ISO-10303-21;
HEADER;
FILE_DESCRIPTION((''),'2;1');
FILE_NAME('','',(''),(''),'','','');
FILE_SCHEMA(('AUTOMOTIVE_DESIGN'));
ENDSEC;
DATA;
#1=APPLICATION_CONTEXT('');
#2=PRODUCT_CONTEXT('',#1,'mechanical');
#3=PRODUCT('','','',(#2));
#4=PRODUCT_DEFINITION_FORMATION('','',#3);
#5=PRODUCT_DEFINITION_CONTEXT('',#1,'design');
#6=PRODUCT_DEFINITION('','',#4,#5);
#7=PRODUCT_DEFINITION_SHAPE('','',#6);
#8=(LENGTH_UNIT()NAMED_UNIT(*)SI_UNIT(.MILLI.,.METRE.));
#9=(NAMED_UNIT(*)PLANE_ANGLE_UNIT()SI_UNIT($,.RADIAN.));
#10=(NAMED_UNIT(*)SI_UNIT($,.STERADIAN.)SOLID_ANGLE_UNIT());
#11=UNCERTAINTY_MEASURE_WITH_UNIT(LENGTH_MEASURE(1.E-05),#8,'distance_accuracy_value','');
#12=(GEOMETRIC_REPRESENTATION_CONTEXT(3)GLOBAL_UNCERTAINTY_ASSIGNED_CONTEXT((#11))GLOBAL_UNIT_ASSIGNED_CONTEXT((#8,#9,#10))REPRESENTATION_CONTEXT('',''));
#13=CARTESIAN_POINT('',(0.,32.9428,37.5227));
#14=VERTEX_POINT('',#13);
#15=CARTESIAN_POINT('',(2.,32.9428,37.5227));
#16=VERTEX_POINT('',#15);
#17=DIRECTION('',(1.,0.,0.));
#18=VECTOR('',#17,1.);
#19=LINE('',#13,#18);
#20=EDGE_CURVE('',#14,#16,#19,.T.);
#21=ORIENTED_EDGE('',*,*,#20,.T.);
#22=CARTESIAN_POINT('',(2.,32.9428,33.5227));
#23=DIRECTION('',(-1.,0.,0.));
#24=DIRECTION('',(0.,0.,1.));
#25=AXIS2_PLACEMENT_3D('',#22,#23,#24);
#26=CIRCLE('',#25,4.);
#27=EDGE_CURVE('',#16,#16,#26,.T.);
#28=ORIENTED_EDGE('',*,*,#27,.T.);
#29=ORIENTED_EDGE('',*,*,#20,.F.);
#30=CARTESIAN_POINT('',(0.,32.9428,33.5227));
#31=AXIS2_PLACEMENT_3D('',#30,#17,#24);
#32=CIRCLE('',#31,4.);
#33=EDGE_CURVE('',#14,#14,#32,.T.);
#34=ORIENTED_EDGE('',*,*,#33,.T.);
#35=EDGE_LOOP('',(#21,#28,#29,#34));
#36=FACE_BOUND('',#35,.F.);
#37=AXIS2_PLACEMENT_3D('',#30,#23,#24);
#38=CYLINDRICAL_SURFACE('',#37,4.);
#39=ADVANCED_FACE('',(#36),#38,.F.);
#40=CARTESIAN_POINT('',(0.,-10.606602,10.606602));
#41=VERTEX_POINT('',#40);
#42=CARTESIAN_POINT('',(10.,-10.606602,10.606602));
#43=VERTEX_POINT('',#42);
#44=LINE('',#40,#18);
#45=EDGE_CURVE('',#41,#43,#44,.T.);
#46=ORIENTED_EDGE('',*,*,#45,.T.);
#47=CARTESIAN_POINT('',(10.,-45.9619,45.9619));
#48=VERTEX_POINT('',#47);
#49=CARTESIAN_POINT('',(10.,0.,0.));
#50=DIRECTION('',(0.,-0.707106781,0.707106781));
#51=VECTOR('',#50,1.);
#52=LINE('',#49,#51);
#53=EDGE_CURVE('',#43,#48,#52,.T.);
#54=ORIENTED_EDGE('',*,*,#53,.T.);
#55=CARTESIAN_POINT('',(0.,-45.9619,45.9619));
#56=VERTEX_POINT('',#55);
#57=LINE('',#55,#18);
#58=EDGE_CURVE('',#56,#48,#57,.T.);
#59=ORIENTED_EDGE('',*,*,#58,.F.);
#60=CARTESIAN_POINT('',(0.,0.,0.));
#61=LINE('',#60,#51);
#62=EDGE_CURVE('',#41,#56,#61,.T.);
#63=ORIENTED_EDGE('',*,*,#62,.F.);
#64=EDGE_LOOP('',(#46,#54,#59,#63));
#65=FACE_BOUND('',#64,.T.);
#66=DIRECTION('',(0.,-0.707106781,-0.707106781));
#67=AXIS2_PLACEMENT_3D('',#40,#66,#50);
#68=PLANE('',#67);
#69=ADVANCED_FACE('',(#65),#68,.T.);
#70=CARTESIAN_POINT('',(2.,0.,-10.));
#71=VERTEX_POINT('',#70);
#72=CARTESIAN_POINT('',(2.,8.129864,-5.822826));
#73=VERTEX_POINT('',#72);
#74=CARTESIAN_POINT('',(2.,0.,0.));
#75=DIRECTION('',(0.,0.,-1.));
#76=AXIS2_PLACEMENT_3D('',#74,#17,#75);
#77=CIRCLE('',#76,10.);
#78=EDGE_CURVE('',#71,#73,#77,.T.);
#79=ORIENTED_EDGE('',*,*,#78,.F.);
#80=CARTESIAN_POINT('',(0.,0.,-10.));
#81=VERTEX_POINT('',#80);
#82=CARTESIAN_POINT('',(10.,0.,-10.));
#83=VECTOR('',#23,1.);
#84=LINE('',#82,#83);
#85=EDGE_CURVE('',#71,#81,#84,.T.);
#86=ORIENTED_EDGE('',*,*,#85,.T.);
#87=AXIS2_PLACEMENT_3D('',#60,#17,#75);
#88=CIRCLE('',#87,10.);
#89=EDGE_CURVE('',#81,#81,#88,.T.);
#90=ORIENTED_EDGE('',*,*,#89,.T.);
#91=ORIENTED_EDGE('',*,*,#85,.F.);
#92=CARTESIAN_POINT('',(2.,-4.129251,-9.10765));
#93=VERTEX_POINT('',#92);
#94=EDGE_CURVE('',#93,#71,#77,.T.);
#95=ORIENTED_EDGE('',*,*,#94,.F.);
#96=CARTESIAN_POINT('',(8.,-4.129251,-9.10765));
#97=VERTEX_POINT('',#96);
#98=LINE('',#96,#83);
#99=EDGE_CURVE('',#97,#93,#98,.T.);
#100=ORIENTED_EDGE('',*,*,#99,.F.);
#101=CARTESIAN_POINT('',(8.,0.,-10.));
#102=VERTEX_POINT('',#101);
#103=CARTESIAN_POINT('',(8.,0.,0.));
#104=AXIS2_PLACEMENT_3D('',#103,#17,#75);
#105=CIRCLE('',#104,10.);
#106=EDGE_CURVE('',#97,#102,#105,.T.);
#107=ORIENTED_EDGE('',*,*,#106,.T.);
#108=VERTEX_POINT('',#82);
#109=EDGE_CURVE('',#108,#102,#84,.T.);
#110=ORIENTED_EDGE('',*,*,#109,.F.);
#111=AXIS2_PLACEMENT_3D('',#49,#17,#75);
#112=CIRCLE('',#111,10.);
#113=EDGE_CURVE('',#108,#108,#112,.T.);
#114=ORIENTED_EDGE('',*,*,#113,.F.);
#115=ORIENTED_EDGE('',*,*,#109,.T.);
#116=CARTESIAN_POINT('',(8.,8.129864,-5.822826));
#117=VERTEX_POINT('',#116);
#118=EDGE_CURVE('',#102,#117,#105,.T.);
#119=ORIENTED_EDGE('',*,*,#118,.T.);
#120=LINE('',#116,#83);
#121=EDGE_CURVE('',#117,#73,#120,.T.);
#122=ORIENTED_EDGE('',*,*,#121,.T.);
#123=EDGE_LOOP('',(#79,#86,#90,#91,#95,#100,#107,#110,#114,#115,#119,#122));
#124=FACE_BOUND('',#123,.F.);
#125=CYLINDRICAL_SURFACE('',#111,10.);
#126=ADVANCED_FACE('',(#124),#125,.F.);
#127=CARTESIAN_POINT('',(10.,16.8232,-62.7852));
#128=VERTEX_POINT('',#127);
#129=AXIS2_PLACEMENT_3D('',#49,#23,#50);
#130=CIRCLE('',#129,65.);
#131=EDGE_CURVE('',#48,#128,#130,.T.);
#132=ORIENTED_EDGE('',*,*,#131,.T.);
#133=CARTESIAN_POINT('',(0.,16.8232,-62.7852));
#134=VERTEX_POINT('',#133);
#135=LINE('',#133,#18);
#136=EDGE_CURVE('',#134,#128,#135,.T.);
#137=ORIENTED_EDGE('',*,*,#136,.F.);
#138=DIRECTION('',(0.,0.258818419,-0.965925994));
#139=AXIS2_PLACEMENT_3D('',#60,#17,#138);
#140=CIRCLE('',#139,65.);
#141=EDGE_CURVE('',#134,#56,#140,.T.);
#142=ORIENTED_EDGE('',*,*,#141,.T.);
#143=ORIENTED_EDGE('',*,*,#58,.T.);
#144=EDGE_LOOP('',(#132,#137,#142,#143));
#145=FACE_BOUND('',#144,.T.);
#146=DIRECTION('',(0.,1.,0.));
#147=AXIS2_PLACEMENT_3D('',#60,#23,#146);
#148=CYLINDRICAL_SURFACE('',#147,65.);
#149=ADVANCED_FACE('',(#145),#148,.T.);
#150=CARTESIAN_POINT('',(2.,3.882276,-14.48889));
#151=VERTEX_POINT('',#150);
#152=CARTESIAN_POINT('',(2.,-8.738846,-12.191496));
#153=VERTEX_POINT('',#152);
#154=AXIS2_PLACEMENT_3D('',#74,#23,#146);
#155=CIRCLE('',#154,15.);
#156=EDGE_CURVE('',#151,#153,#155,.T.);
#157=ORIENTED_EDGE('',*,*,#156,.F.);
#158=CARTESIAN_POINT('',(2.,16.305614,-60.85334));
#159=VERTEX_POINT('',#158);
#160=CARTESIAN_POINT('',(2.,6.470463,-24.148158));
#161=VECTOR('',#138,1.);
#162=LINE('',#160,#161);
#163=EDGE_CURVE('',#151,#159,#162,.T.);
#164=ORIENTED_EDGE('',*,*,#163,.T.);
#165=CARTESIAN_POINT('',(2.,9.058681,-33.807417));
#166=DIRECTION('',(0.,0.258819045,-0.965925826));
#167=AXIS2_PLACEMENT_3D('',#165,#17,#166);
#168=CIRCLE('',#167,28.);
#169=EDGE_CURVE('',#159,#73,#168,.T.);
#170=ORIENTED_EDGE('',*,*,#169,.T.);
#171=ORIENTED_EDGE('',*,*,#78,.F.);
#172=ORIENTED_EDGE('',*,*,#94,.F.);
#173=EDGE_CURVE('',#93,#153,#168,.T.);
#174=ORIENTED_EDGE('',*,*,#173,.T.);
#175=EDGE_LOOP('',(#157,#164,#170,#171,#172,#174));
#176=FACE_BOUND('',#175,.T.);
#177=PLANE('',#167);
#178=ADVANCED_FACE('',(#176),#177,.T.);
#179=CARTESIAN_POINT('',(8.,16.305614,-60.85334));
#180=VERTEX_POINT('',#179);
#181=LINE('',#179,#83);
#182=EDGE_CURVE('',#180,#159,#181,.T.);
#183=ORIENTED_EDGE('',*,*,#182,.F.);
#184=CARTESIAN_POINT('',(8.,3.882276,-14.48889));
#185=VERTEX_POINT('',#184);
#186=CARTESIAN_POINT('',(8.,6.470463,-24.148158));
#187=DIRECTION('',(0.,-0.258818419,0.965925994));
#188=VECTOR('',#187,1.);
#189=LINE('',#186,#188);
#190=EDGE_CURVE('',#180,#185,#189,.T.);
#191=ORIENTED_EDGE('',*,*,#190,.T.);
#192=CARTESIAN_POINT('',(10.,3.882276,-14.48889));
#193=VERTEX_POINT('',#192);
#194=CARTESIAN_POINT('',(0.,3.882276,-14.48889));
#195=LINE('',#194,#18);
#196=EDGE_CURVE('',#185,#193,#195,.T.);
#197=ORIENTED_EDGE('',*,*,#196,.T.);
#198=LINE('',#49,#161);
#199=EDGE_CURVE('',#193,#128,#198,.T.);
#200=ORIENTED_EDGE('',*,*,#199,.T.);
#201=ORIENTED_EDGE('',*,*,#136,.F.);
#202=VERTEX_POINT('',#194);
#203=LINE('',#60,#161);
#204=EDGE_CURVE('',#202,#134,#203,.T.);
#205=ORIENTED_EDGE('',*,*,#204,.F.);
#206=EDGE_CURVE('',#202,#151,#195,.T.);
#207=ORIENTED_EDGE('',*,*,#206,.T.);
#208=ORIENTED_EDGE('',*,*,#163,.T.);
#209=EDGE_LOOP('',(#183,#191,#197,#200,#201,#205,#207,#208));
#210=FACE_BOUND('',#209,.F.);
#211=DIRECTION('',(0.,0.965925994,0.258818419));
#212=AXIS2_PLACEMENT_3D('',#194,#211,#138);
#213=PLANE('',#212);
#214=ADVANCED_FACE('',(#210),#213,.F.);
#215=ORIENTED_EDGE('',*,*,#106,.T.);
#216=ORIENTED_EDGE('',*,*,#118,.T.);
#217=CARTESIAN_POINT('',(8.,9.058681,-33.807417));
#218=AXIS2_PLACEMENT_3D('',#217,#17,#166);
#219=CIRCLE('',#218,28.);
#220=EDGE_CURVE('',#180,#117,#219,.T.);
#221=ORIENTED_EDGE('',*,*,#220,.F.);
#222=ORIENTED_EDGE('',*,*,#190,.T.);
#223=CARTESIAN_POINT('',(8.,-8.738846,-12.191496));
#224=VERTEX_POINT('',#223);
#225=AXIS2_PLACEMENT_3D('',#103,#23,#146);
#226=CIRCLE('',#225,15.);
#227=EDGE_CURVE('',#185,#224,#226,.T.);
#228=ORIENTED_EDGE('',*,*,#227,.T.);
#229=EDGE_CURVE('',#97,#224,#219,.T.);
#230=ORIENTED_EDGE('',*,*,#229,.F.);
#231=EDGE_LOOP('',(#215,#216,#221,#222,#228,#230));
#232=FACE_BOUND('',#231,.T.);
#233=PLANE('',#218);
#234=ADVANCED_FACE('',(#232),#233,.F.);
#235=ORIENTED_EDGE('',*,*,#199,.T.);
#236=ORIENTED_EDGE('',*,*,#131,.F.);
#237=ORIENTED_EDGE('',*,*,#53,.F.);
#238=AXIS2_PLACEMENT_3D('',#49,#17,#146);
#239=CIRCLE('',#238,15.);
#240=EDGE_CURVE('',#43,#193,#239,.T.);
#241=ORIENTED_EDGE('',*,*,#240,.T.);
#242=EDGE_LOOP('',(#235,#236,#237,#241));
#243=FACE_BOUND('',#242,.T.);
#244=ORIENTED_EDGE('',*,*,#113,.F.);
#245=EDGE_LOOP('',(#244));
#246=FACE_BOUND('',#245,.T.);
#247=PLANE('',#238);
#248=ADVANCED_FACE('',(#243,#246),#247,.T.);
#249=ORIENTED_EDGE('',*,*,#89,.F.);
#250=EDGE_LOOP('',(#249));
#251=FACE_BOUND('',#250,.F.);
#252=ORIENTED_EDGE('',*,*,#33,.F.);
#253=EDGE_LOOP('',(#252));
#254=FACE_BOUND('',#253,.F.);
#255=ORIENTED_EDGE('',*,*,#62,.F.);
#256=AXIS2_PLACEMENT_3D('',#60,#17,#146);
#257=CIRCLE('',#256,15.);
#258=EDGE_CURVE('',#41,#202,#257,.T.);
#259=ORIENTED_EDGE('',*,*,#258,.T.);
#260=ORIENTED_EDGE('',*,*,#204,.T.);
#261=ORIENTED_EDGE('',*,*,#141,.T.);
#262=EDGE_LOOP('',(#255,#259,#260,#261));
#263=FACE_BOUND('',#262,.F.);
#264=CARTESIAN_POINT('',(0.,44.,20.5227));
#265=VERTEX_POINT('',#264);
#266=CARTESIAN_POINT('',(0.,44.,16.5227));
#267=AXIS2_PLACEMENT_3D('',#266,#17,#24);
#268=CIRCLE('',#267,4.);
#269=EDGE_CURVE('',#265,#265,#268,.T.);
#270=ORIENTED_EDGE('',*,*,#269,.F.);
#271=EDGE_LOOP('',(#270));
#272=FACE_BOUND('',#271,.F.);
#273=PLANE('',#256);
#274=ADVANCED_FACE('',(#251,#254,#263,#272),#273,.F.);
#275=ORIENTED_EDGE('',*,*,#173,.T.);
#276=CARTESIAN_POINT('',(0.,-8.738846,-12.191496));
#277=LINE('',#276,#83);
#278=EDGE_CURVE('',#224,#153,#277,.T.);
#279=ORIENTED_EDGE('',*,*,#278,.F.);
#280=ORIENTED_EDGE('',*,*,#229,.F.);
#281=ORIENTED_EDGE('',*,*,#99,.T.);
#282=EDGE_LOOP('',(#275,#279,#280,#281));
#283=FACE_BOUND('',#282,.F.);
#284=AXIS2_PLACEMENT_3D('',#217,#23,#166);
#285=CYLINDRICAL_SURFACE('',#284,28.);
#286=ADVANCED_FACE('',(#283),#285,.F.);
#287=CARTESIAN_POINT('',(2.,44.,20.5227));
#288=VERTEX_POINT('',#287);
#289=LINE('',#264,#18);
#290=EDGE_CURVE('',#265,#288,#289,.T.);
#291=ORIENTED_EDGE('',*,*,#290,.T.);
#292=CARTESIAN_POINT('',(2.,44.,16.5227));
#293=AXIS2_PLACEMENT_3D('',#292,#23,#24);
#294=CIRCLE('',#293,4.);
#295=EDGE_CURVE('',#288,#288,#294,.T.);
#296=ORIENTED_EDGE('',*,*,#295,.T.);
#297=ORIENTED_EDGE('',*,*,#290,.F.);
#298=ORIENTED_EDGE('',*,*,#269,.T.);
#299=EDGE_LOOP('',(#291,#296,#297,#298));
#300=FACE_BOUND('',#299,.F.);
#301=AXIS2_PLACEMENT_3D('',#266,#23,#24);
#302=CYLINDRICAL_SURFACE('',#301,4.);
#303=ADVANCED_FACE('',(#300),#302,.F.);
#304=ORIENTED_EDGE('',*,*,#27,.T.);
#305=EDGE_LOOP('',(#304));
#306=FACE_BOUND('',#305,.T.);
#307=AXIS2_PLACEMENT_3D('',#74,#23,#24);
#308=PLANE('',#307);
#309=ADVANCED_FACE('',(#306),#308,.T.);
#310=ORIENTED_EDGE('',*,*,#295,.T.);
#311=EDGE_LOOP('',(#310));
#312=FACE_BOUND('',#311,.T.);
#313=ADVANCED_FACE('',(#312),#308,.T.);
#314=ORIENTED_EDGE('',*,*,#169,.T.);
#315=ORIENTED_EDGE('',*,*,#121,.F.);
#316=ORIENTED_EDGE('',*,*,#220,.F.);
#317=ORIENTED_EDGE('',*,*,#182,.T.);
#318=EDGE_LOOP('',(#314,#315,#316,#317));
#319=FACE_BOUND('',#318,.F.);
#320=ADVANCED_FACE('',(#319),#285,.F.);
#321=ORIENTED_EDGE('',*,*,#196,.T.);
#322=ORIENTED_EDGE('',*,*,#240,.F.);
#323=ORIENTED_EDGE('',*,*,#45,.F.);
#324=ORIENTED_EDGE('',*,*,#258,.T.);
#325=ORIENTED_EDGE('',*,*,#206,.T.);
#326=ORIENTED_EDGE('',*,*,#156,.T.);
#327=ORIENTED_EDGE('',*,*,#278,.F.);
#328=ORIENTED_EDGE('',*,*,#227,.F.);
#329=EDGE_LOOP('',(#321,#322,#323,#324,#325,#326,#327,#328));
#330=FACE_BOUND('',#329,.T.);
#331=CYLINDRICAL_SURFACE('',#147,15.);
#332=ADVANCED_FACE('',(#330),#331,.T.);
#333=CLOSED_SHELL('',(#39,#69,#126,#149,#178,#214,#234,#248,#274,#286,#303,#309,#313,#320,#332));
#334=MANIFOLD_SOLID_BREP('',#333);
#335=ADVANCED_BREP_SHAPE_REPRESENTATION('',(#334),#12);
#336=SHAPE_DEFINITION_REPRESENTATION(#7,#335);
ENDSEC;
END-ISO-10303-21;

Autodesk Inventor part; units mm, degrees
ref_plane "YZ Plane" through (0, 0, 0) normal (1, 0, 0) x (0, 1, 0)
ref_plane "XZ Plane" through (0, 0, 0) normal (0, 1, 0) x (-1, 0, 0)
ref_plane "XY Plane" through (0, 0, 0) normal (0, 0, 1) x (1, 0, 0)
sketch "Boceto1" plane through (0, 0, 0) normal (1, 0, 0) x (0, 1, 0)
  circle A0 centre (0, 0) radius 65
  line L0 (0, 0) -> (-45.9619, 45.9619)
  line L1 (0, 0) -> (65, 0) construction
  line L2 (0, 0) -> (16.8232, -62.7852)
  line L3 (0, 0) -> (65, 0) construction
  circle A1 centre (0, 0) radius 15
  dimension "d5" = 130
  dimension "d6" = 135
  dimension "d7" = 75
  dimension "d8" = 30
extrude "Extrusión1" add sketch "Boceto1" along normal blind 10 contours A0 L2 A1 L0 | A1 L2 L0 | L0 L2 A1 picked at (40.3579, 26.2595)
sketch "Boceto2" plane through (0, 3.8823, -14.4889) normal (0, -0.9659258, -0.258819) x (1, 0, 0)
  line L0 (2, -20) -> (8, -20)
  line L1 (8, -20) -> (8, -48)
  line L2 (8, -48) -> (2, -48)
  line L3 (2, -48) -> (2, -20)
  line L4 (10, 0) -> (10, 27.9904) projected
  line L5 (0, -50) -> (10, -50) projected
  point P0 (0, 15)
  dimension "d11" = 6
  dimension "d12" = 28
  dimension "d18" = 2
revolve "Revolución1" cut sketch "Boceto2" angle 360 about axis through (2, 9.0587, -33.8074) along (1, 0, 0)
sketch "Boceto3" plane through (10, 0, 0) normal (1, 0, 0) x (0, 0, -1)
  circle A0 centre (0, 0) radius 10
  arc A1 (-10.6066, -10.6066) -> (14.4889, 3.8823) centre (0, 0) ccw projected
  dimension "d20" = 20
extrude "Extrusión2" cut sketch "Boceto3" against normal blind 10
sketch "Boceto4" plane through (0, 0, 0) normal (-1, 0, 0) x (0, 0, 1)
  point P0 (0, 0)
sketch "Boceto5" plane through (0, 0, 0) normal (-1, 0, 0) x (0, 0, 1)
  arc A0 (46.9928, -0.8201) -> (0, 47) centre (0, 0) ccw
  circle A1 centre (16.5227, 44) radius 4
  circle A2 centre (33.5227, 32.9428) radius 4
  dimension "d23" = 47
  dimension "d24" = 8
  dimension "d25" = 8
  dimension "d28" = 17
  dimension "d29" = 44
extrude "Extrusión3" cut sketch "Boceto5" against normal blind 2
properties part number "protector"
